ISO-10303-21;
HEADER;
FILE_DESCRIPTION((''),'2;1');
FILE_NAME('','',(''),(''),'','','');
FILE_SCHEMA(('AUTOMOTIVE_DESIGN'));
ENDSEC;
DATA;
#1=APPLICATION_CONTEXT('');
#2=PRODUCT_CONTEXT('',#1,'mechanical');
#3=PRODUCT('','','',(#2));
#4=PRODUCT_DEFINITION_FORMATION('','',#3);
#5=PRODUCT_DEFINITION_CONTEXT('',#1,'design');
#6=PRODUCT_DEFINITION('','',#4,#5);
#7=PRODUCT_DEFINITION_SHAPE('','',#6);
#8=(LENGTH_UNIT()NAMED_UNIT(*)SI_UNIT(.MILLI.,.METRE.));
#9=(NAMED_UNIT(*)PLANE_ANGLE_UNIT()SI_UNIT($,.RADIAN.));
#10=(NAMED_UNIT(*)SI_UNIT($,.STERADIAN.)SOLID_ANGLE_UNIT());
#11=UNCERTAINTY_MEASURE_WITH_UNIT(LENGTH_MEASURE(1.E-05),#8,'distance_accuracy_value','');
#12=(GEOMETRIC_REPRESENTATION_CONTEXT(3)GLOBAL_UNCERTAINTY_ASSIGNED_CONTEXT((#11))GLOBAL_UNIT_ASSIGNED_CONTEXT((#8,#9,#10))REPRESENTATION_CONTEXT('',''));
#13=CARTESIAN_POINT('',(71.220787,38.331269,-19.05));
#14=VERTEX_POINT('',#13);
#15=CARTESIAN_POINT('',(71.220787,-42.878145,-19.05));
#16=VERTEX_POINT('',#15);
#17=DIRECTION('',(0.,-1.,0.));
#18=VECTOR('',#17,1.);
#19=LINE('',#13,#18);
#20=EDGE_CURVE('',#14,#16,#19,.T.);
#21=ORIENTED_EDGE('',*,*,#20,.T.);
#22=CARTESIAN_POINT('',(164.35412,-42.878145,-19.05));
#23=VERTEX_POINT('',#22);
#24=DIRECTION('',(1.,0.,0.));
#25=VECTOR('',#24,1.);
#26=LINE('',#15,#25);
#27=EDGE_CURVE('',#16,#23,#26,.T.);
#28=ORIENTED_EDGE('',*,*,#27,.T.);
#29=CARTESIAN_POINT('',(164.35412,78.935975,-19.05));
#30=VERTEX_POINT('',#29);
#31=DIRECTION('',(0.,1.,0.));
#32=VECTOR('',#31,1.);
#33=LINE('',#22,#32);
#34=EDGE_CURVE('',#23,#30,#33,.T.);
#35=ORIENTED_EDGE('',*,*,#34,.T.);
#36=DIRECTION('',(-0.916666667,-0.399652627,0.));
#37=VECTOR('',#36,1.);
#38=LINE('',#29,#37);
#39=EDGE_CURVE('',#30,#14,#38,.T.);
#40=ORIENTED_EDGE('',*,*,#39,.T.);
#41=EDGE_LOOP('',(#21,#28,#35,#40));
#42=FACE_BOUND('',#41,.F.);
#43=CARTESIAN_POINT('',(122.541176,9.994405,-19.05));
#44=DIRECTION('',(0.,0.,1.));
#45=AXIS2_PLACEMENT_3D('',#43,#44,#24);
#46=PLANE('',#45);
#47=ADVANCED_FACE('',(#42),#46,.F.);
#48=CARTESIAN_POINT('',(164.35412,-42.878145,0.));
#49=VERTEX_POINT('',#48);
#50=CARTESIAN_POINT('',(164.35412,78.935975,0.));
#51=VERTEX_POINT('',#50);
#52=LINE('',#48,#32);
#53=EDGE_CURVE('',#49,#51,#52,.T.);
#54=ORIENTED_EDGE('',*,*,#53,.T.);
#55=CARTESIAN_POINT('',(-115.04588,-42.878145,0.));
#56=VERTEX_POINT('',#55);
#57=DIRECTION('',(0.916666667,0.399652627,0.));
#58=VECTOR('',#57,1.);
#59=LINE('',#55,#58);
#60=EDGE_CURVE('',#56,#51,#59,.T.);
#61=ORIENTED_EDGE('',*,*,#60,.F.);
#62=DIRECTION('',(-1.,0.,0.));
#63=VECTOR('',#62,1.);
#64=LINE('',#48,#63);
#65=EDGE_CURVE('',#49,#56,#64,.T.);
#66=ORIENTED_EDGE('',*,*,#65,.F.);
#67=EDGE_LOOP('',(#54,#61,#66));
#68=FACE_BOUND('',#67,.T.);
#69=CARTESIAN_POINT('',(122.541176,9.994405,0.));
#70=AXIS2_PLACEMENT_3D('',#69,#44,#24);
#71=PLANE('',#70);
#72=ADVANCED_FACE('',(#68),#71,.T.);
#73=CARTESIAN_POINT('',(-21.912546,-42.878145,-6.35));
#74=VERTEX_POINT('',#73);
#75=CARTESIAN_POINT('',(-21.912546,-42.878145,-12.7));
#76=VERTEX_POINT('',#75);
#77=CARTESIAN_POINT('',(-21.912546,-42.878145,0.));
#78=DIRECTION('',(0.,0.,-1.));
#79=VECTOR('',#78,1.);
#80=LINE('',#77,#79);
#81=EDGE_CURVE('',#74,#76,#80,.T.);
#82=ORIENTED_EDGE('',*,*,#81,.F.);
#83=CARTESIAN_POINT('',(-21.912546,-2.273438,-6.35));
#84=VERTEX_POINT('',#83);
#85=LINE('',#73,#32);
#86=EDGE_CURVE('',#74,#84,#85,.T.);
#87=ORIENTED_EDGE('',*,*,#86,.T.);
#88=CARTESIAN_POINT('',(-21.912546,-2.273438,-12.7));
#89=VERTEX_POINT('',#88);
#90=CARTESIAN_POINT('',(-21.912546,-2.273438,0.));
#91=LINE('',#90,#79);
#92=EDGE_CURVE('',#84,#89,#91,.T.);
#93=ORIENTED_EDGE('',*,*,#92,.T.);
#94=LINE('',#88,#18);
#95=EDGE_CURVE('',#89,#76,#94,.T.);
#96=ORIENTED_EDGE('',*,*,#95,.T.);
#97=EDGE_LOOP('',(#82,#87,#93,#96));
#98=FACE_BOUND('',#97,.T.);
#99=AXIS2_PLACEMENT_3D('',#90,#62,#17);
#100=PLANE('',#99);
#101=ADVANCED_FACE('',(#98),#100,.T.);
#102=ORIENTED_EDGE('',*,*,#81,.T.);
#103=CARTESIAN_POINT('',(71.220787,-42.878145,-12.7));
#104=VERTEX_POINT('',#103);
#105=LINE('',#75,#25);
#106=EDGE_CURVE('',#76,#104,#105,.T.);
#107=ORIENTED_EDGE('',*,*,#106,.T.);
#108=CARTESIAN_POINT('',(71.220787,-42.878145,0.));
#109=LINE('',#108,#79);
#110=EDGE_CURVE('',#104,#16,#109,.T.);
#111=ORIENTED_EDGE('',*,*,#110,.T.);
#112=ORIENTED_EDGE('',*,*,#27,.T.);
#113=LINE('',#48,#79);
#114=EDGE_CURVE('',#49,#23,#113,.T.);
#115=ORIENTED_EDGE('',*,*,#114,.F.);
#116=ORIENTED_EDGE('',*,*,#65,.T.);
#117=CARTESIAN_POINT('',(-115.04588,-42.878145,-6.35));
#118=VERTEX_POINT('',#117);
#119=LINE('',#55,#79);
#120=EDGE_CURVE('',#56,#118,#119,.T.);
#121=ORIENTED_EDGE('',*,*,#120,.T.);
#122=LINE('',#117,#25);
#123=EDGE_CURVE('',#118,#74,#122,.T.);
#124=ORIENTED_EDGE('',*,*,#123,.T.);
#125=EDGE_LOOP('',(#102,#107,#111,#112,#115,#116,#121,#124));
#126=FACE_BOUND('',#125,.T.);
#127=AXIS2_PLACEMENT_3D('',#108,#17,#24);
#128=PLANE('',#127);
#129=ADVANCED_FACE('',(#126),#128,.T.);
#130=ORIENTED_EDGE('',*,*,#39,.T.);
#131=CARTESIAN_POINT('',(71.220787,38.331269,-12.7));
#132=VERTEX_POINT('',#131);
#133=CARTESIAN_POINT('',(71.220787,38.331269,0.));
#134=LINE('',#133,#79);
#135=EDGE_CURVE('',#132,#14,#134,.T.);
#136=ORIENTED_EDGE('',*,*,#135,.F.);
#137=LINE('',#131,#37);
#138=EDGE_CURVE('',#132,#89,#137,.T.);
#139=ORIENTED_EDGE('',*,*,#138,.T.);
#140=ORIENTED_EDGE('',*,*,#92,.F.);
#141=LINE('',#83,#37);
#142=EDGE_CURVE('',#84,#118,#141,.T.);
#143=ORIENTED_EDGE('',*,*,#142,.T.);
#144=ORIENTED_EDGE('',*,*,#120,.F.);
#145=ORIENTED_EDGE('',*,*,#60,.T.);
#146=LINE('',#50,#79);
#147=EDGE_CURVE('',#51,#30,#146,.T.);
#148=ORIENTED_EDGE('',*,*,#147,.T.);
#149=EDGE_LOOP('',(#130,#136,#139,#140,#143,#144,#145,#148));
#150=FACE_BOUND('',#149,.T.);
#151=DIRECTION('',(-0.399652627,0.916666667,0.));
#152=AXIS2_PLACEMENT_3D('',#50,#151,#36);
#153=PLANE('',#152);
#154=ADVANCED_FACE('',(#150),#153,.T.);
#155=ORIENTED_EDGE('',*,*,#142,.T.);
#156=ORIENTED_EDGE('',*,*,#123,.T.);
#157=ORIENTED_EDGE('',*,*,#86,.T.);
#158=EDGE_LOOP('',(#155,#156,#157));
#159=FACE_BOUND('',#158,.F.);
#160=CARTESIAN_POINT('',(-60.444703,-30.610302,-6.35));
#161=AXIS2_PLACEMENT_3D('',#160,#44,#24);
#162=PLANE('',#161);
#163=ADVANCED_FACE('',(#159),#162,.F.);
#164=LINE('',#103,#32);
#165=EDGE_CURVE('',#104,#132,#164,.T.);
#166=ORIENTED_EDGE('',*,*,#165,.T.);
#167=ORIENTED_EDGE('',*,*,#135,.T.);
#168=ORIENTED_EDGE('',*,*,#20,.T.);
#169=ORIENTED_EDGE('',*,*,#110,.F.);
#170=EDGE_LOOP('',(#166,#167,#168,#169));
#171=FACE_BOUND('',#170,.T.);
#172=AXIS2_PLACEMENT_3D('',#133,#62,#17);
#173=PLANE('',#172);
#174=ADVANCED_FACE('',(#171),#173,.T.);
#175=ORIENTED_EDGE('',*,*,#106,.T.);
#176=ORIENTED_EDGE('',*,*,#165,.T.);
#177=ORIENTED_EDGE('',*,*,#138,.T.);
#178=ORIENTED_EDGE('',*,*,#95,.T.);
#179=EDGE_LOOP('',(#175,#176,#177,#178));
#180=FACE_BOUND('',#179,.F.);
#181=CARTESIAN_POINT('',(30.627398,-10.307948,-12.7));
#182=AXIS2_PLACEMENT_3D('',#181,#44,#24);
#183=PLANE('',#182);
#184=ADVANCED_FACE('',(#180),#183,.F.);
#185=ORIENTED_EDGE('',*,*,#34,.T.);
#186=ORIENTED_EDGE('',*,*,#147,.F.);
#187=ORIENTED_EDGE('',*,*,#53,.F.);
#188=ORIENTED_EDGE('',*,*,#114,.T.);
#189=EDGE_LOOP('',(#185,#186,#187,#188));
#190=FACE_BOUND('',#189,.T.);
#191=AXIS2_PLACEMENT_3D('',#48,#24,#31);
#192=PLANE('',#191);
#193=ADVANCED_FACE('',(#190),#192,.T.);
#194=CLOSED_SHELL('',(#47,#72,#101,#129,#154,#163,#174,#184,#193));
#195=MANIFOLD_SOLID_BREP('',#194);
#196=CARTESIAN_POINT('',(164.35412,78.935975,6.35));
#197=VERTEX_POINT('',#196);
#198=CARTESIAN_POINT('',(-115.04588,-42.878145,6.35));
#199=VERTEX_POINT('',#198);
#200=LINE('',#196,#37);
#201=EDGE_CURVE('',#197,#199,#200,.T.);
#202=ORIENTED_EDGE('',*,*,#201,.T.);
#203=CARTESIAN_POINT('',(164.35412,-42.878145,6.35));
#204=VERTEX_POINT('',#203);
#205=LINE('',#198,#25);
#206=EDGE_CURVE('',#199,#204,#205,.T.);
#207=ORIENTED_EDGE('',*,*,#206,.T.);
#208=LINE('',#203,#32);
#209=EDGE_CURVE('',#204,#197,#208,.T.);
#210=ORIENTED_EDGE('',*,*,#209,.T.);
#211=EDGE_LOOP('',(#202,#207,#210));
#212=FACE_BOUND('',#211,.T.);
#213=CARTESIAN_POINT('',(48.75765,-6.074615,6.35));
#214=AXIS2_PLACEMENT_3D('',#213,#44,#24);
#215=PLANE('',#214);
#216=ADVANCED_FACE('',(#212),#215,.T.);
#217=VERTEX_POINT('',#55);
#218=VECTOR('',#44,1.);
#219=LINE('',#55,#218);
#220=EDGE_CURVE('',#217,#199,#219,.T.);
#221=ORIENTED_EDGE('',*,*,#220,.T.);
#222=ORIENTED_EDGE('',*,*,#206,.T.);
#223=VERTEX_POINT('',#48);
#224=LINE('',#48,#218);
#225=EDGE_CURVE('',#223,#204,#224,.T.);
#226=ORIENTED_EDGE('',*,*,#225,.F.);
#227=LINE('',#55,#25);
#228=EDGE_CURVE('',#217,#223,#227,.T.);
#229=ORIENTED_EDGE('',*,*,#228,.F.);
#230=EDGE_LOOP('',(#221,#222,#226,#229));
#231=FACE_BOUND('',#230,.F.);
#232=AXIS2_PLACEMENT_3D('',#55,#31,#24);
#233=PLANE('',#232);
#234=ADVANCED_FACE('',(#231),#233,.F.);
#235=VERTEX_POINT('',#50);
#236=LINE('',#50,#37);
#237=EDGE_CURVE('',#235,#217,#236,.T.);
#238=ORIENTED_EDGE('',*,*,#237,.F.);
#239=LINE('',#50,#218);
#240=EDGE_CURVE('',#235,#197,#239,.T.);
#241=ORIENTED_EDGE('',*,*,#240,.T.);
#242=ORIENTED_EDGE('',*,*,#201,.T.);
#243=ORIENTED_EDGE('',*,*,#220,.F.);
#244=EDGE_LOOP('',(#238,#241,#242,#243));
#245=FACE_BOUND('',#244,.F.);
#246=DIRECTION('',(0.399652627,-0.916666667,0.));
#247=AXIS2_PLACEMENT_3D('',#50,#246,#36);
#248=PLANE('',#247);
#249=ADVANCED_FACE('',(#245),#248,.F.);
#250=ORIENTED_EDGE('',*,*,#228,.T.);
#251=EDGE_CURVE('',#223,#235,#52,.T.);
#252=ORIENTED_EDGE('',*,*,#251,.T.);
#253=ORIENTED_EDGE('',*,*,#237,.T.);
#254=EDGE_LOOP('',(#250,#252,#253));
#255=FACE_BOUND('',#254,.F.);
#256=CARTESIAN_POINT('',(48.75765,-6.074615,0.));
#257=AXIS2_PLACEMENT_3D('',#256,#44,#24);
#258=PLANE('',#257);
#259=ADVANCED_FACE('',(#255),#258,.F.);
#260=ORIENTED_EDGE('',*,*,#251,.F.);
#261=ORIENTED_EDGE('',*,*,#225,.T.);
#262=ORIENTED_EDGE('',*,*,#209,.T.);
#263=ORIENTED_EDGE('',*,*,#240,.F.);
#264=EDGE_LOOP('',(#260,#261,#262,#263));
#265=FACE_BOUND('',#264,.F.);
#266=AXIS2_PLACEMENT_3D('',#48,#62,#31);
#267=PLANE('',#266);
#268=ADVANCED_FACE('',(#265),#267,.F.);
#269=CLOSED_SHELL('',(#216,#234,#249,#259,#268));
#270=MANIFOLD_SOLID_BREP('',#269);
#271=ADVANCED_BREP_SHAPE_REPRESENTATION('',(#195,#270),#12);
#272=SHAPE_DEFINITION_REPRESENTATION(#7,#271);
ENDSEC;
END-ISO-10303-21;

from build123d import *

# Parameters (mm, degrees)
F2_DEPTH = 6.35
F3_DEPTH = 6.35
F4_DEPTH = 12.7
F5_DEPTH = 19.05


with BuildPart() as f2:
    # F0 (on Top) → F2 (new body)
    with BuildSketch(Plane.XY):
        Polygon((164.3541202068, 78.9359754823), (-115.0458797932, -42.8781452098), (164.3541202068, -42.8781452098), align=None)
    extrude(amount=F2_DEPTH)


with BuildPart() as f3:
    # F1 (on face) → F3 (new body)
    with BuildSketch(Plane.XY):
        Polygon((-21.9125464598, -42.8781452098), (-21.9125464598, -2.2734383124), (-115.0458797932, -42.8781452098), align=None)
    extrude(amount=-F3_DEPTH)

    # F1 (on face) → F4 (join)
    with BuildSketch(Plane.XY):
        Polygon((71.2207868735, -42.8781452098), (71.2207868735, 38.331268585), (-21.9125464598, -2.2734383124), (-21.9125464598, -42.8781452098), align=None)
    extrude(amount=-F4_DEPTH)

    # F1 (on face) → F5 (join)
    with BuildSketch(Plane.XY):
        Polygon((164.3541202068, -42.8781452098), (164.3541202068, 78.9359754823), (71.2207868735, 38.331268585), (71.2207868735, -42.8781452098), align=None)
    extrude(amount=-F5_DEPTH)


solid = Compound([f2.part, f3.part])
